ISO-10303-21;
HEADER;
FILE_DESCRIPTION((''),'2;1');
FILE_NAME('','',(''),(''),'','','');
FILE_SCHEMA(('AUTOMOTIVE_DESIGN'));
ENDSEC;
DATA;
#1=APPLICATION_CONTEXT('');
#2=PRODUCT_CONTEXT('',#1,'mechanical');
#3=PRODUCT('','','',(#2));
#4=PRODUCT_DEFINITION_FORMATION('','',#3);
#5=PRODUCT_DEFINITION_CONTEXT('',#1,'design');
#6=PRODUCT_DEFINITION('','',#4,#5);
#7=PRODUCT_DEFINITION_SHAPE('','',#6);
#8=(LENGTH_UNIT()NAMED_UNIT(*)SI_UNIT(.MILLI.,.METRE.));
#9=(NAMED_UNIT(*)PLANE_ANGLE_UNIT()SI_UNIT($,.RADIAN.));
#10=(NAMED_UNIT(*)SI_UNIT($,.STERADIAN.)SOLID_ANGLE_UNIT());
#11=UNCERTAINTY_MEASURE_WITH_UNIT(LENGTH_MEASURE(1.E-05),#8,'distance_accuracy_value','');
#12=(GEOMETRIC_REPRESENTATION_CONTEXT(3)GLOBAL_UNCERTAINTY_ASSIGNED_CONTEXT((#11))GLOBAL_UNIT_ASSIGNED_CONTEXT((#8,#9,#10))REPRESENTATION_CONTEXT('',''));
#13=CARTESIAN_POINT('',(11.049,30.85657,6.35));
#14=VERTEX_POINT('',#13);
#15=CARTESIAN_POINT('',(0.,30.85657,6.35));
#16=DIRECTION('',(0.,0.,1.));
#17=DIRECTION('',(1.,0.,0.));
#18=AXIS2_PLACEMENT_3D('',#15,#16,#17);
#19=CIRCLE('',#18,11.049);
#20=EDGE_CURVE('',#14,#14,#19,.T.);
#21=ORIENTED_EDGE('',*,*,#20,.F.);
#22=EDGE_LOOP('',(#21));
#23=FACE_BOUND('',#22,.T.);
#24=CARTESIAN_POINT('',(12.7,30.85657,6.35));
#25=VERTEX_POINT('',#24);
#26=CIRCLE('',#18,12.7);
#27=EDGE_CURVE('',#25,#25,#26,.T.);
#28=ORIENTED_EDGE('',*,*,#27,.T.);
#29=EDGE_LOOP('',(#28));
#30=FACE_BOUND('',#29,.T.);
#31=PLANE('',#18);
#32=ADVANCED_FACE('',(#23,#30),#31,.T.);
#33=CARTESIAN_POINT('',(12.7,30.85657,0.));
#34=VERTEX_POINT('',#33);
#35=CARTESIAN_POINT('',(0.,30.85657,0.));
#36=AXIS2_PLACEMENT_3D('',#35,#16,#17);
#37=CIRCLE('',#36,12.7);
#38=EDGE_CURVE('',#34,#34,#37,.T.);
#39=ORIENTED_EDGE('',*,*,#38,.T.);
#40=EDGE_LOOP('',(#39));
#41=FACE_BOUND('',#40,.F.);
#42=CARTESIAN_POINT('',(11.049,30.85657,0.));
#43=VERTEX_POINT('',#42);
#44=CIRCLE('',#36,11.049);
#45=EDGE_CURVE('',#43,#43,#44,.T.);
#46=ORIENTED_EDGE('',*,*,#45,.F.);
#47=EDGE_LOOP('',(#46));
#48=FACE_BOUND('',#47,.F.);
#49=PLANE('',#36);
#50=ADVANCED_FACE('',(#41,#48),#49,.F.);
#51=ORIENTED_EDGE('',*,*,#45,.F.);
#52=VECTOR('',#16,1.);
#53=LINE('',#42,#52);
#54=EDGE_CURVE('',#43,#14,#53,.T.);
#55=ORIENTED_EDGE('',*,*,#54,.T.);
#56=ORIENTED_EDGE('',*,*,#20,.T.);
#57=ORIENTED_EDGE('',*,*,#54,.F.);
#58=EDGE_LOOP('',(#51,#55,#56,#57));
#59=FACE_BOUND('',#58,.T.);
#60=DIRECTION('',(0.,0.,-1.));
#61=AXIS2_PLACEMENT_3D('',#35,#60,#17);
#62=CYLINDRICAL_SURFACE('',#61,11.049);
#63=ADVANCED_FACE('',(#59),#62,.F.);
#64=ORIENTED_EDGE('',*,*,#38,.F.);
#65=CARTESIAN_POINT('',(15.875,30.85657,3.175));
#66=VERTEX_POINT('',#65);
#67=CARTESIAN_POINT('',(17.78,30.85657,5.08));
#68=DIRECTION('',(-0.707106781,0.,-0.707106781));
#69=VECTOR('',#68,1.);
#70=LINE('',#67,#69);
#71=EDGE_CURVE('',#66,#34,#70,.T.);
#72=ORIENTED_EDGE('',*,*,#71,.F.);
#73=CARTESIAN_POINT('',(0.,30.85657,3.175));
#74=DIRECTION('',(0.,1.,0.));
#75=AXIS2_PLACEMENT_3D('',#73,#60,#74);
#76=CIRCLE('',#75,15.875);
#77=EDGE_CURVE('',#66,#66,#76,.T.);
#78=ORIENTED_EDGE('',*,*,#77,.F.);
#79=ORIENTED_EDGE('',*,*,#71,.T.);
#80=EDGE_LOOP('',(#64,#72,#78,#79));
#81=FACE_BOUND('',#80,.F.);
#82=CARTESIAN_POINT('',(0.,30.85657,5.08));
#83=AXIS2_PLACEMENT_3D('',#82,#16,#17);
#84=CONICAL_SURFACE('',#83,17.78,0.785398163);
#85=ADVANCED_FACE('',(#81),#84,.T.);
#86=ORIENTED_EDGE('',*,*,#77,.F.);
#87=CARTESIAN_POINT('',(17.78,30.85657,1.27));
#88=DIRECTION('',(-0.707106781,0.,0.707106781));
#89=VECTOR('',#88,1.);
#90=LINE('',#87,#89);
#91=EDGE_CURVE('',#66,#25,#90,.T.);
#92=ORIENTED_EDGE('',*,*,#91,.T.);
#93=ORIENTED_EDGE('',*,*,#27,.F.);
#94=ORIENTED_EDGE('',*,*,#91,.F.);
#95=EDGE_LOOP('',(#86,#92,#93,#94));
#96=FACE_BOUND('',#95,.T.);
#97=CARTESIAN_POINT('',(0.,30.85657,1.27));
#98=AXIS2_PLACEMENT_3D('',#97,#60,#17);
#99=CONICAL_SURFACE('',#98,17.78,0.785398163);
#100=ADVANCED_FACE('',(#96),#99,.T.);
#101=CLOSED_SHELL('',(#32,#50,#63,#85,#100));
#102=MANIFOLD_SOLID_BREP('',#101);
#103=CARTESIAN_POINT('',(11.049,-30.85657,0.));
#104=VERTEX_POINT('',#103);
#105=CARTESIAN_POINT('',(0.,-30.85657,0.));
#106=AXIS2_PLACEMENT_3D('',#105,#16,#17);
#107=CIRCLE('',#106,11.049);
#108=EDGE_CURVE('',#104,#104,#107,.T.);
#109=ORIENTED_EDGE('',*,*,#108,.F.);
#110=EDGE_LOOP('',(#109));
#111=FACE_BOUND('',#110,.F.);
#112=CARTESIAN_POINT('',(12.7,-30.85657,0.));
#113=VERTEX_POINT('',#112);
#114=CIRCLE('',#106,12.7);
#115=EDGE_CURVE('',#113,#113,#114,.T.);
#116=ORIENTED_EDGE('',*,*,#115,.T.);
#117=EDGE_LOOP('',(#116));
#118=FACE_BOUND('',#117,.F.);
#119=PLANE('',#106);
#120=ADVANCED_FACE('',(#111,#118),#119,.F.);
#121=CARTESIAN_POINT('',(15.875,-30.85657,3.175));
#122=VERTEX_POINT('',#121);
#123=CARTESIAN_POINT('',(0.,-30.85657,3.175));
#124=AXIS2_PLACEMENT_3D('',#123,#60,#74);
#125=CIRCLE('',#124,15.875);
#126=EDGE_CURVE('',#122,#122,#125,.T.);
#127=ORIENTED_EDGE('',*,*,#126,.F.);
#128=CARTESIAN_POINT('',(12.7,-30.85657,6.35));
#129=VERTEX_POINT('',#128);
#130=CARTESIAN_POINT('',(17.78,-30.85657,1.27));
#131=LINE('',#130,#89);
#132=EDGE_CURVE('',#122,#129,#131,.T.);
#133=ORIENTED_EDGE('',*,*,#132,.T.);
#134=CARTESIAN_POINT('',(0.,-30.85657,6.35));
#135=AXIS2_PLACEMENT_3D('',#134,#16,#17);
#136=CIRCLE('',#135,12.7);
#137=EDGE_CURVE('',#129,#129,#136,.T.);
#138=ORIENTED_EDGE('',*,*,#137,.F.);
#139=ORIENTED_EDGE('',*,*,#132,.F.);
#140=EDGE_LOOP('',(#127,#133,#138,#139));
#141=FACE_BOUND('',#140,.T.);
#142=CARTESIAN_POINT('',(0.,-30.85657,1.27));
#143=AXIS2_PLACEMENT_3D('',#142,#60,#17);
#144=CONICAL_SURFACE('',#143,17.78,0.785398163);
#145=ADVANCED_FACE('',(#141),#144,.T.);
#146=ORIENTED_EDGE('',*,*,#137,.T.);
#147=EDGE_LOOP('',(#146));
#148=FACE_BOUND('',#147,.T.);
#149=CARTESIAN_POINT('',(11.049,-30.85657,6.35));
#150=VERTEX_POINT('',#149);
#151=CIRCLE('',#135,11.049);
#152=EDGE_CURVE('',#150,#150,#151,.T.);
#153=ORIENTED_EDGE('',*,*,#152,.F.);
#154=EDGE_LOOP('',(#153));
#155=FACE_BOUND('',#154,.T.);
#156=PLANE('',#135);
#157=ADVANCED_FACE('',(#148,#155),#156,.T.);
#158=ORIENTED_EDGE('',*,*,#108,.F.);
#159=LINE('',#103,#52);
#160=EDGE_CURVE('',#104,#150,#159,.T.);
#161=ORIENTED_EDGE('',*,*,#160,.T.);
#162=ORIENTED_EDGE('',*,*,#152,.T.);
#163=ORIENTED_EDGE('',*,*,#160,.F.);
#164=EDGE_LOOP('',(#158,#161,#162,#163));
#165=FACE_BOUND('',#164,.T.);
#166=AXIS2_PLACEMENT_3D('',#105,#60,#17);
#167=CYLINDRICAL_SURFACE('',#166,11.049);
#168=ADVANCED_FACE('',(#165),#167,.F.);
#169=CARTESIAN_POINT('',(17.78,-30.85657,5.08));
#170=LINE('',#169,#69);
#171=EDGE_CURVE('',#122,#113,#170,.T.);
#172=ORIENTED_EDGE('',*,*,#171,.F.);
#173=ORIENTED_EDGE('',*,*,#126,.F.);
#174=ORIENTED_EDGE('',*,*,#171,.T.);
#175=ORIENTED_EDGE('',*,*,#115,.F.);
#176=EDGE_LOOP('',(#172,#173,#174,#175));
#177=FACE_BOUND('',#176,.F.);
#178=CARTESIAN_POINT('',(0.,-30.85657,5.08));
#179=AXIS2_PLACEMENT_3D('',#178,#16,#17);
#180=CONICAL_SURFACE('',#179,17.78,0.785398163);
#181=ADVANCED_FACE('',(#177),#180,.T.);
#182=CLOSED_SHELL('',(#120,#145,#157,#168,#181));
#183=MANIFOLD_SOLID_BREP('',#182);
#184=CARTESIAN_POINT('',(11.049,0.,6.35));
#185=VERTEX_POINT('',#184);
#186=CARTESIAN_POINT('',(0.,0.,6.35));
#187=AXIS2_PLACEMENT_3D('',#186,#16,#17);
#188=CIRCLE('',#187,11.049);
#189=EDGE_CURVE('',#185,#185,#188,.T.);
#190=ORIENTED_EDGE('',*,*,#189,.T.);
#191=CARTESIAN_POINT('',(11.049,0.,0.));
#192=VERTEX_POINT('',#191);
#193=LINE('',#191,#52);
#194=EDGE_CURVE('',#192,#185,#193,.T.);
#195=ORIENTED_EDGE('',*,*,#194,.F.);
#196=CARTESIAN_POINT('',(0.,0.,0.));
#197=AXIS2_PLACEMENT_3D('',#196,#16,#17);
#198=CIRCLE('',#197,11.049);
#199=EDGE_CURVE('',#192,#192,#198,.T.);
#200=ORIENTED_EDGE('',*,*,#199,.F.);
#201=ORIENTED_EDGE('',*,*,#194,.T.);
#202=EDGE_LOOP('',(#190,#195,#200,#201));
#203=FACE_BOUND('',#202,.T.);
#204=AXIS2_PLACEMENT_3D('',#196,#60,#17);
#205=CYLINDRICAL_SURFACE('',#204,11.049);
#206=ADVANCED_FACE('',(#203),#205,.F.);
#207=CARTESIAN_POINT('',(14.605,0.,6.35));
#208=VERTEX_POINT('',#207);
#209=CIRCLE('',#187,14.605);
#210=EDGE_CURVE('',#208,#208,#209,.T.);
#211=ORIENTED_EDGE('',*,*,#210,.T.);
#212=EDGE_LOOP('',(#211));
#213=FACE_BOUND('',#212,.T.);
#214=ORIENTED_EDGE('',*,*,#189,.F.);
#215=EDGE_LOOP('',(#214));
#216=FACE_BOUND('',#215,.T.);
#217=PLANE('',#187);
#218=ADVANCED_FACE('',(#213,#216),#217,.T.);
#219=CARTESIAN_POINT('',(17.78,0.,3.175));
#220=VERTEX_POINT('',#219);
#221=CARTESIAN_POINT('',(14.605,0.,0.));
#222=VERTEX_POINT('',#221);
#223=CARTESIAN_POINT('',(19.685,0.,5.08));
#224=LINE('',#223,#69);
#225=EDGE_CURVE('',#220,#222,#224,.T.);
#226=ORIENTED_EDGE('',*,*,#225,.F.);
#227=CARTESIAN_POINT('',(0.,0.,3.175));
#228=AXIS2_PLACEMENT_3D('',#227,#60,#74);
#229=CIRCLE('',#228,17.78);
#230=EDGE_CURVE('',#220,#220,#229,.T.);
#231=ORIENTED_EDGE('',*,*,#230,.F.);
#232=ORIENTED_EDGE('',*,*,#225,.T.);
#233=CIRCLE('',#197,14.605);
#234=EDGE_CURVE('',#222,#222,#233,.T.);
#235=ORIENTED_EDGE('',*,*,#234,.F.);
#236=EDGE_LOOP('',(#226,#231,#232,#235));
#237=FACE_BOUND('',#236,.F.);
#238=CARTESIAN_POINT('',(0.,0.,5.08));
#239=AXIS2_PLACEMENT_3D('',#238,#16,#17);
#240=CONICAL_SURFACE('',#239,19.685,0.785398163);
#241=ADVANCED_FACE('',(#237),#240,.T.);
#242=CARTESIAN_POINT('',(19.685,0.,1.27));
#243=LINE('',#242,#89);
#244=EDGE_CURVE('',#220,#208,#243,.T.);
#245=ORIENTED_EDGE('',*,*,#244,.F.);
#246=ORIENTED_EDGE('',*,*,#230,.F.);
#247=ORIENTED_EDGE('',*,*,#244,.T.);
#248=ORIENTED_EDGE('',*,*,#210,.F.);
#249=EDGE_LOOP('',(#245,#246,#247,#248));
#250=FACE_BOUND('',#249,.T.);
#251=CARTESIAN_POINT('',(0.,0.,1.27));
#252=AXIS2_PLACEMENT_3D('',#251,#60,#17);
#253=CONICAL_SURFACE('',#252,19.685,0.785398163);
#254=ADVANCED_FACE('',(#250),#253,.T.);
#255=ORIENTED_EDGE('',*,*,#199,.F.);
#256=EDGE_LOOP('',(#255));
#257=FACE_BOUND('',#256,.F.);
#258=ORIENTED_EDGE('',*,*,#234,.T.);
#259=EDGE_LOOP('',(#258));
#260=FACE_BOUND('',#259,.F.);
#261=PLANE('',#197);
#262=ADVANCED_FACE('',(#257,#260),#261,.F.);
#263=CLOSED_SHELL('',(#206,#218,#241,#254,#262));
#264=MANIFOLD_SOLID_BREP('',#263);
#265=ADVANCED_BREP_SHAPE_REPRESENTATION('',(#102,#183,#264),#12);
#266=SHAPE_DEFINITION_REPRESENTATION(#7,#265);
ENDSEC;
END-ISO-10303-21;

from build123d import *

# Parameters (mm, degrees)
F1_R      = 17.78
F1_R_2    = 11.049
F3_DEPTH  = 6.35
F2_R      = 19.685
F2_R_2    = 11.049
F0_R      = 17.78
F0_R_2    = 11.049
F4_SIZE   = 5.08
F4_2_SIZE = 5.08
F4_3_SIZE = 5.08


# Not quite as in the source:
# - a fillet or chamfer that OpenCascade refuses, or shapes differently, is made with other operations: its cross-section is extruded or revolved along the edge and cut away or added


with BuildPart() as f3:
    # F1 (on Top) → F3 (new body)
    with BuildSketch(Plane.XY):
        with Locations((0, 30.8565702289)):
            Circle(F1_R)
        with Locations((0, 30.8565702289)):
            Circle(F1_R_2, mode=Mode.SUBTRACT)
    extrude(amount=F3_DEPTH)

    # F4
    f4_edges = [f3.edges().sort_by_distance(p)[0] for p in [
        (-17.78, 30.85657, 0),
    ]]
    chamfer(f4_edges, length=F4_SIZE)

    # F5: chamfer of 5.08 on 1 edges, made by hand

    # F5_s1 → F5_t2 (revolve, cut)
    with BuildSketch(Plane.XZ.offset(-30.8565702289)):
        Polygon((17.78, 1.27), (12.7, 6.35), (17.78, 6.35), align=None)
    revolve(axis=Axis((0, 30.8565702289, 6.35), (0, 0, 1)), mode=Mode.SUBTRACT)


with BuildPart() as f3b:
    # F2 (on Top) → F3, piece 2 (new body)
    with BuildSketch(Plane.XY):
        Circle(F2_R)
        Circle(F2_R_2, mode=Mode.SUBTRACT)
    extrude(amount=F3_DEPTH)

    # F4#2
    f4_2_edges = [f3b.edges().sort_by_distance(p)[0] for p in [
        (-19.685, 0, 0),
    ]]
    chamfer(f4_2_edges, length=F4_2_SIZE)

    # F5#2: chamfer of 5.08 on 1 edges, made by hand

    # F5_2_s1 → F5_2_t2 (revolve, cut)
    with BuildSketch(Plane.XZ):
        Polygon((19.685, 1.27), (14.605, 6.35), (19.685, 6.35), align=None)
    revolve(axis=Axis((0, 0, 6.35), (0, 0, 1)), mode=Mode.SUBTRACT)


with BuildPart() as f3c:
    # F0 (on Top) → F3, piece 3 (new body)
    with BuildSketch(Plane.XY):
        with Locations((0, -30.8565702289)):
            Circle(F0_R)
        with Locations((0, -30.8565702289)):
            Circle(F0_R_2, mode=Mode.SUBTRACT)
    extrude(amount=F3_DEPTH)

    # F4#3
    f4_3_edges = [f3c.edges().sort_by_distance(p)[0] for p in [
        (-17.78, -30.85657, 0),
    ]]
    chamfer(f4_3_edges, length=F4_3_SIZE)

    # F5#3: chamfer of 5.08 on 1 edges, made by hand

    # F5_3_s1 → F5_3_t2 (revolve, cut)
    with BuildSketch(Plane.XZ.offset(30.8565702289)):
        Polygon((17.78, 1.27), (12.7, 6.35), (17.78, 6.35), align=None)
    revolve(axis=Axis((0, -30.8565702289, 6.35), (0, 0, 1)), mode=Mode.SUBTRACT)


solid = Compound([f3.part, f3b.part, f3c.part])
